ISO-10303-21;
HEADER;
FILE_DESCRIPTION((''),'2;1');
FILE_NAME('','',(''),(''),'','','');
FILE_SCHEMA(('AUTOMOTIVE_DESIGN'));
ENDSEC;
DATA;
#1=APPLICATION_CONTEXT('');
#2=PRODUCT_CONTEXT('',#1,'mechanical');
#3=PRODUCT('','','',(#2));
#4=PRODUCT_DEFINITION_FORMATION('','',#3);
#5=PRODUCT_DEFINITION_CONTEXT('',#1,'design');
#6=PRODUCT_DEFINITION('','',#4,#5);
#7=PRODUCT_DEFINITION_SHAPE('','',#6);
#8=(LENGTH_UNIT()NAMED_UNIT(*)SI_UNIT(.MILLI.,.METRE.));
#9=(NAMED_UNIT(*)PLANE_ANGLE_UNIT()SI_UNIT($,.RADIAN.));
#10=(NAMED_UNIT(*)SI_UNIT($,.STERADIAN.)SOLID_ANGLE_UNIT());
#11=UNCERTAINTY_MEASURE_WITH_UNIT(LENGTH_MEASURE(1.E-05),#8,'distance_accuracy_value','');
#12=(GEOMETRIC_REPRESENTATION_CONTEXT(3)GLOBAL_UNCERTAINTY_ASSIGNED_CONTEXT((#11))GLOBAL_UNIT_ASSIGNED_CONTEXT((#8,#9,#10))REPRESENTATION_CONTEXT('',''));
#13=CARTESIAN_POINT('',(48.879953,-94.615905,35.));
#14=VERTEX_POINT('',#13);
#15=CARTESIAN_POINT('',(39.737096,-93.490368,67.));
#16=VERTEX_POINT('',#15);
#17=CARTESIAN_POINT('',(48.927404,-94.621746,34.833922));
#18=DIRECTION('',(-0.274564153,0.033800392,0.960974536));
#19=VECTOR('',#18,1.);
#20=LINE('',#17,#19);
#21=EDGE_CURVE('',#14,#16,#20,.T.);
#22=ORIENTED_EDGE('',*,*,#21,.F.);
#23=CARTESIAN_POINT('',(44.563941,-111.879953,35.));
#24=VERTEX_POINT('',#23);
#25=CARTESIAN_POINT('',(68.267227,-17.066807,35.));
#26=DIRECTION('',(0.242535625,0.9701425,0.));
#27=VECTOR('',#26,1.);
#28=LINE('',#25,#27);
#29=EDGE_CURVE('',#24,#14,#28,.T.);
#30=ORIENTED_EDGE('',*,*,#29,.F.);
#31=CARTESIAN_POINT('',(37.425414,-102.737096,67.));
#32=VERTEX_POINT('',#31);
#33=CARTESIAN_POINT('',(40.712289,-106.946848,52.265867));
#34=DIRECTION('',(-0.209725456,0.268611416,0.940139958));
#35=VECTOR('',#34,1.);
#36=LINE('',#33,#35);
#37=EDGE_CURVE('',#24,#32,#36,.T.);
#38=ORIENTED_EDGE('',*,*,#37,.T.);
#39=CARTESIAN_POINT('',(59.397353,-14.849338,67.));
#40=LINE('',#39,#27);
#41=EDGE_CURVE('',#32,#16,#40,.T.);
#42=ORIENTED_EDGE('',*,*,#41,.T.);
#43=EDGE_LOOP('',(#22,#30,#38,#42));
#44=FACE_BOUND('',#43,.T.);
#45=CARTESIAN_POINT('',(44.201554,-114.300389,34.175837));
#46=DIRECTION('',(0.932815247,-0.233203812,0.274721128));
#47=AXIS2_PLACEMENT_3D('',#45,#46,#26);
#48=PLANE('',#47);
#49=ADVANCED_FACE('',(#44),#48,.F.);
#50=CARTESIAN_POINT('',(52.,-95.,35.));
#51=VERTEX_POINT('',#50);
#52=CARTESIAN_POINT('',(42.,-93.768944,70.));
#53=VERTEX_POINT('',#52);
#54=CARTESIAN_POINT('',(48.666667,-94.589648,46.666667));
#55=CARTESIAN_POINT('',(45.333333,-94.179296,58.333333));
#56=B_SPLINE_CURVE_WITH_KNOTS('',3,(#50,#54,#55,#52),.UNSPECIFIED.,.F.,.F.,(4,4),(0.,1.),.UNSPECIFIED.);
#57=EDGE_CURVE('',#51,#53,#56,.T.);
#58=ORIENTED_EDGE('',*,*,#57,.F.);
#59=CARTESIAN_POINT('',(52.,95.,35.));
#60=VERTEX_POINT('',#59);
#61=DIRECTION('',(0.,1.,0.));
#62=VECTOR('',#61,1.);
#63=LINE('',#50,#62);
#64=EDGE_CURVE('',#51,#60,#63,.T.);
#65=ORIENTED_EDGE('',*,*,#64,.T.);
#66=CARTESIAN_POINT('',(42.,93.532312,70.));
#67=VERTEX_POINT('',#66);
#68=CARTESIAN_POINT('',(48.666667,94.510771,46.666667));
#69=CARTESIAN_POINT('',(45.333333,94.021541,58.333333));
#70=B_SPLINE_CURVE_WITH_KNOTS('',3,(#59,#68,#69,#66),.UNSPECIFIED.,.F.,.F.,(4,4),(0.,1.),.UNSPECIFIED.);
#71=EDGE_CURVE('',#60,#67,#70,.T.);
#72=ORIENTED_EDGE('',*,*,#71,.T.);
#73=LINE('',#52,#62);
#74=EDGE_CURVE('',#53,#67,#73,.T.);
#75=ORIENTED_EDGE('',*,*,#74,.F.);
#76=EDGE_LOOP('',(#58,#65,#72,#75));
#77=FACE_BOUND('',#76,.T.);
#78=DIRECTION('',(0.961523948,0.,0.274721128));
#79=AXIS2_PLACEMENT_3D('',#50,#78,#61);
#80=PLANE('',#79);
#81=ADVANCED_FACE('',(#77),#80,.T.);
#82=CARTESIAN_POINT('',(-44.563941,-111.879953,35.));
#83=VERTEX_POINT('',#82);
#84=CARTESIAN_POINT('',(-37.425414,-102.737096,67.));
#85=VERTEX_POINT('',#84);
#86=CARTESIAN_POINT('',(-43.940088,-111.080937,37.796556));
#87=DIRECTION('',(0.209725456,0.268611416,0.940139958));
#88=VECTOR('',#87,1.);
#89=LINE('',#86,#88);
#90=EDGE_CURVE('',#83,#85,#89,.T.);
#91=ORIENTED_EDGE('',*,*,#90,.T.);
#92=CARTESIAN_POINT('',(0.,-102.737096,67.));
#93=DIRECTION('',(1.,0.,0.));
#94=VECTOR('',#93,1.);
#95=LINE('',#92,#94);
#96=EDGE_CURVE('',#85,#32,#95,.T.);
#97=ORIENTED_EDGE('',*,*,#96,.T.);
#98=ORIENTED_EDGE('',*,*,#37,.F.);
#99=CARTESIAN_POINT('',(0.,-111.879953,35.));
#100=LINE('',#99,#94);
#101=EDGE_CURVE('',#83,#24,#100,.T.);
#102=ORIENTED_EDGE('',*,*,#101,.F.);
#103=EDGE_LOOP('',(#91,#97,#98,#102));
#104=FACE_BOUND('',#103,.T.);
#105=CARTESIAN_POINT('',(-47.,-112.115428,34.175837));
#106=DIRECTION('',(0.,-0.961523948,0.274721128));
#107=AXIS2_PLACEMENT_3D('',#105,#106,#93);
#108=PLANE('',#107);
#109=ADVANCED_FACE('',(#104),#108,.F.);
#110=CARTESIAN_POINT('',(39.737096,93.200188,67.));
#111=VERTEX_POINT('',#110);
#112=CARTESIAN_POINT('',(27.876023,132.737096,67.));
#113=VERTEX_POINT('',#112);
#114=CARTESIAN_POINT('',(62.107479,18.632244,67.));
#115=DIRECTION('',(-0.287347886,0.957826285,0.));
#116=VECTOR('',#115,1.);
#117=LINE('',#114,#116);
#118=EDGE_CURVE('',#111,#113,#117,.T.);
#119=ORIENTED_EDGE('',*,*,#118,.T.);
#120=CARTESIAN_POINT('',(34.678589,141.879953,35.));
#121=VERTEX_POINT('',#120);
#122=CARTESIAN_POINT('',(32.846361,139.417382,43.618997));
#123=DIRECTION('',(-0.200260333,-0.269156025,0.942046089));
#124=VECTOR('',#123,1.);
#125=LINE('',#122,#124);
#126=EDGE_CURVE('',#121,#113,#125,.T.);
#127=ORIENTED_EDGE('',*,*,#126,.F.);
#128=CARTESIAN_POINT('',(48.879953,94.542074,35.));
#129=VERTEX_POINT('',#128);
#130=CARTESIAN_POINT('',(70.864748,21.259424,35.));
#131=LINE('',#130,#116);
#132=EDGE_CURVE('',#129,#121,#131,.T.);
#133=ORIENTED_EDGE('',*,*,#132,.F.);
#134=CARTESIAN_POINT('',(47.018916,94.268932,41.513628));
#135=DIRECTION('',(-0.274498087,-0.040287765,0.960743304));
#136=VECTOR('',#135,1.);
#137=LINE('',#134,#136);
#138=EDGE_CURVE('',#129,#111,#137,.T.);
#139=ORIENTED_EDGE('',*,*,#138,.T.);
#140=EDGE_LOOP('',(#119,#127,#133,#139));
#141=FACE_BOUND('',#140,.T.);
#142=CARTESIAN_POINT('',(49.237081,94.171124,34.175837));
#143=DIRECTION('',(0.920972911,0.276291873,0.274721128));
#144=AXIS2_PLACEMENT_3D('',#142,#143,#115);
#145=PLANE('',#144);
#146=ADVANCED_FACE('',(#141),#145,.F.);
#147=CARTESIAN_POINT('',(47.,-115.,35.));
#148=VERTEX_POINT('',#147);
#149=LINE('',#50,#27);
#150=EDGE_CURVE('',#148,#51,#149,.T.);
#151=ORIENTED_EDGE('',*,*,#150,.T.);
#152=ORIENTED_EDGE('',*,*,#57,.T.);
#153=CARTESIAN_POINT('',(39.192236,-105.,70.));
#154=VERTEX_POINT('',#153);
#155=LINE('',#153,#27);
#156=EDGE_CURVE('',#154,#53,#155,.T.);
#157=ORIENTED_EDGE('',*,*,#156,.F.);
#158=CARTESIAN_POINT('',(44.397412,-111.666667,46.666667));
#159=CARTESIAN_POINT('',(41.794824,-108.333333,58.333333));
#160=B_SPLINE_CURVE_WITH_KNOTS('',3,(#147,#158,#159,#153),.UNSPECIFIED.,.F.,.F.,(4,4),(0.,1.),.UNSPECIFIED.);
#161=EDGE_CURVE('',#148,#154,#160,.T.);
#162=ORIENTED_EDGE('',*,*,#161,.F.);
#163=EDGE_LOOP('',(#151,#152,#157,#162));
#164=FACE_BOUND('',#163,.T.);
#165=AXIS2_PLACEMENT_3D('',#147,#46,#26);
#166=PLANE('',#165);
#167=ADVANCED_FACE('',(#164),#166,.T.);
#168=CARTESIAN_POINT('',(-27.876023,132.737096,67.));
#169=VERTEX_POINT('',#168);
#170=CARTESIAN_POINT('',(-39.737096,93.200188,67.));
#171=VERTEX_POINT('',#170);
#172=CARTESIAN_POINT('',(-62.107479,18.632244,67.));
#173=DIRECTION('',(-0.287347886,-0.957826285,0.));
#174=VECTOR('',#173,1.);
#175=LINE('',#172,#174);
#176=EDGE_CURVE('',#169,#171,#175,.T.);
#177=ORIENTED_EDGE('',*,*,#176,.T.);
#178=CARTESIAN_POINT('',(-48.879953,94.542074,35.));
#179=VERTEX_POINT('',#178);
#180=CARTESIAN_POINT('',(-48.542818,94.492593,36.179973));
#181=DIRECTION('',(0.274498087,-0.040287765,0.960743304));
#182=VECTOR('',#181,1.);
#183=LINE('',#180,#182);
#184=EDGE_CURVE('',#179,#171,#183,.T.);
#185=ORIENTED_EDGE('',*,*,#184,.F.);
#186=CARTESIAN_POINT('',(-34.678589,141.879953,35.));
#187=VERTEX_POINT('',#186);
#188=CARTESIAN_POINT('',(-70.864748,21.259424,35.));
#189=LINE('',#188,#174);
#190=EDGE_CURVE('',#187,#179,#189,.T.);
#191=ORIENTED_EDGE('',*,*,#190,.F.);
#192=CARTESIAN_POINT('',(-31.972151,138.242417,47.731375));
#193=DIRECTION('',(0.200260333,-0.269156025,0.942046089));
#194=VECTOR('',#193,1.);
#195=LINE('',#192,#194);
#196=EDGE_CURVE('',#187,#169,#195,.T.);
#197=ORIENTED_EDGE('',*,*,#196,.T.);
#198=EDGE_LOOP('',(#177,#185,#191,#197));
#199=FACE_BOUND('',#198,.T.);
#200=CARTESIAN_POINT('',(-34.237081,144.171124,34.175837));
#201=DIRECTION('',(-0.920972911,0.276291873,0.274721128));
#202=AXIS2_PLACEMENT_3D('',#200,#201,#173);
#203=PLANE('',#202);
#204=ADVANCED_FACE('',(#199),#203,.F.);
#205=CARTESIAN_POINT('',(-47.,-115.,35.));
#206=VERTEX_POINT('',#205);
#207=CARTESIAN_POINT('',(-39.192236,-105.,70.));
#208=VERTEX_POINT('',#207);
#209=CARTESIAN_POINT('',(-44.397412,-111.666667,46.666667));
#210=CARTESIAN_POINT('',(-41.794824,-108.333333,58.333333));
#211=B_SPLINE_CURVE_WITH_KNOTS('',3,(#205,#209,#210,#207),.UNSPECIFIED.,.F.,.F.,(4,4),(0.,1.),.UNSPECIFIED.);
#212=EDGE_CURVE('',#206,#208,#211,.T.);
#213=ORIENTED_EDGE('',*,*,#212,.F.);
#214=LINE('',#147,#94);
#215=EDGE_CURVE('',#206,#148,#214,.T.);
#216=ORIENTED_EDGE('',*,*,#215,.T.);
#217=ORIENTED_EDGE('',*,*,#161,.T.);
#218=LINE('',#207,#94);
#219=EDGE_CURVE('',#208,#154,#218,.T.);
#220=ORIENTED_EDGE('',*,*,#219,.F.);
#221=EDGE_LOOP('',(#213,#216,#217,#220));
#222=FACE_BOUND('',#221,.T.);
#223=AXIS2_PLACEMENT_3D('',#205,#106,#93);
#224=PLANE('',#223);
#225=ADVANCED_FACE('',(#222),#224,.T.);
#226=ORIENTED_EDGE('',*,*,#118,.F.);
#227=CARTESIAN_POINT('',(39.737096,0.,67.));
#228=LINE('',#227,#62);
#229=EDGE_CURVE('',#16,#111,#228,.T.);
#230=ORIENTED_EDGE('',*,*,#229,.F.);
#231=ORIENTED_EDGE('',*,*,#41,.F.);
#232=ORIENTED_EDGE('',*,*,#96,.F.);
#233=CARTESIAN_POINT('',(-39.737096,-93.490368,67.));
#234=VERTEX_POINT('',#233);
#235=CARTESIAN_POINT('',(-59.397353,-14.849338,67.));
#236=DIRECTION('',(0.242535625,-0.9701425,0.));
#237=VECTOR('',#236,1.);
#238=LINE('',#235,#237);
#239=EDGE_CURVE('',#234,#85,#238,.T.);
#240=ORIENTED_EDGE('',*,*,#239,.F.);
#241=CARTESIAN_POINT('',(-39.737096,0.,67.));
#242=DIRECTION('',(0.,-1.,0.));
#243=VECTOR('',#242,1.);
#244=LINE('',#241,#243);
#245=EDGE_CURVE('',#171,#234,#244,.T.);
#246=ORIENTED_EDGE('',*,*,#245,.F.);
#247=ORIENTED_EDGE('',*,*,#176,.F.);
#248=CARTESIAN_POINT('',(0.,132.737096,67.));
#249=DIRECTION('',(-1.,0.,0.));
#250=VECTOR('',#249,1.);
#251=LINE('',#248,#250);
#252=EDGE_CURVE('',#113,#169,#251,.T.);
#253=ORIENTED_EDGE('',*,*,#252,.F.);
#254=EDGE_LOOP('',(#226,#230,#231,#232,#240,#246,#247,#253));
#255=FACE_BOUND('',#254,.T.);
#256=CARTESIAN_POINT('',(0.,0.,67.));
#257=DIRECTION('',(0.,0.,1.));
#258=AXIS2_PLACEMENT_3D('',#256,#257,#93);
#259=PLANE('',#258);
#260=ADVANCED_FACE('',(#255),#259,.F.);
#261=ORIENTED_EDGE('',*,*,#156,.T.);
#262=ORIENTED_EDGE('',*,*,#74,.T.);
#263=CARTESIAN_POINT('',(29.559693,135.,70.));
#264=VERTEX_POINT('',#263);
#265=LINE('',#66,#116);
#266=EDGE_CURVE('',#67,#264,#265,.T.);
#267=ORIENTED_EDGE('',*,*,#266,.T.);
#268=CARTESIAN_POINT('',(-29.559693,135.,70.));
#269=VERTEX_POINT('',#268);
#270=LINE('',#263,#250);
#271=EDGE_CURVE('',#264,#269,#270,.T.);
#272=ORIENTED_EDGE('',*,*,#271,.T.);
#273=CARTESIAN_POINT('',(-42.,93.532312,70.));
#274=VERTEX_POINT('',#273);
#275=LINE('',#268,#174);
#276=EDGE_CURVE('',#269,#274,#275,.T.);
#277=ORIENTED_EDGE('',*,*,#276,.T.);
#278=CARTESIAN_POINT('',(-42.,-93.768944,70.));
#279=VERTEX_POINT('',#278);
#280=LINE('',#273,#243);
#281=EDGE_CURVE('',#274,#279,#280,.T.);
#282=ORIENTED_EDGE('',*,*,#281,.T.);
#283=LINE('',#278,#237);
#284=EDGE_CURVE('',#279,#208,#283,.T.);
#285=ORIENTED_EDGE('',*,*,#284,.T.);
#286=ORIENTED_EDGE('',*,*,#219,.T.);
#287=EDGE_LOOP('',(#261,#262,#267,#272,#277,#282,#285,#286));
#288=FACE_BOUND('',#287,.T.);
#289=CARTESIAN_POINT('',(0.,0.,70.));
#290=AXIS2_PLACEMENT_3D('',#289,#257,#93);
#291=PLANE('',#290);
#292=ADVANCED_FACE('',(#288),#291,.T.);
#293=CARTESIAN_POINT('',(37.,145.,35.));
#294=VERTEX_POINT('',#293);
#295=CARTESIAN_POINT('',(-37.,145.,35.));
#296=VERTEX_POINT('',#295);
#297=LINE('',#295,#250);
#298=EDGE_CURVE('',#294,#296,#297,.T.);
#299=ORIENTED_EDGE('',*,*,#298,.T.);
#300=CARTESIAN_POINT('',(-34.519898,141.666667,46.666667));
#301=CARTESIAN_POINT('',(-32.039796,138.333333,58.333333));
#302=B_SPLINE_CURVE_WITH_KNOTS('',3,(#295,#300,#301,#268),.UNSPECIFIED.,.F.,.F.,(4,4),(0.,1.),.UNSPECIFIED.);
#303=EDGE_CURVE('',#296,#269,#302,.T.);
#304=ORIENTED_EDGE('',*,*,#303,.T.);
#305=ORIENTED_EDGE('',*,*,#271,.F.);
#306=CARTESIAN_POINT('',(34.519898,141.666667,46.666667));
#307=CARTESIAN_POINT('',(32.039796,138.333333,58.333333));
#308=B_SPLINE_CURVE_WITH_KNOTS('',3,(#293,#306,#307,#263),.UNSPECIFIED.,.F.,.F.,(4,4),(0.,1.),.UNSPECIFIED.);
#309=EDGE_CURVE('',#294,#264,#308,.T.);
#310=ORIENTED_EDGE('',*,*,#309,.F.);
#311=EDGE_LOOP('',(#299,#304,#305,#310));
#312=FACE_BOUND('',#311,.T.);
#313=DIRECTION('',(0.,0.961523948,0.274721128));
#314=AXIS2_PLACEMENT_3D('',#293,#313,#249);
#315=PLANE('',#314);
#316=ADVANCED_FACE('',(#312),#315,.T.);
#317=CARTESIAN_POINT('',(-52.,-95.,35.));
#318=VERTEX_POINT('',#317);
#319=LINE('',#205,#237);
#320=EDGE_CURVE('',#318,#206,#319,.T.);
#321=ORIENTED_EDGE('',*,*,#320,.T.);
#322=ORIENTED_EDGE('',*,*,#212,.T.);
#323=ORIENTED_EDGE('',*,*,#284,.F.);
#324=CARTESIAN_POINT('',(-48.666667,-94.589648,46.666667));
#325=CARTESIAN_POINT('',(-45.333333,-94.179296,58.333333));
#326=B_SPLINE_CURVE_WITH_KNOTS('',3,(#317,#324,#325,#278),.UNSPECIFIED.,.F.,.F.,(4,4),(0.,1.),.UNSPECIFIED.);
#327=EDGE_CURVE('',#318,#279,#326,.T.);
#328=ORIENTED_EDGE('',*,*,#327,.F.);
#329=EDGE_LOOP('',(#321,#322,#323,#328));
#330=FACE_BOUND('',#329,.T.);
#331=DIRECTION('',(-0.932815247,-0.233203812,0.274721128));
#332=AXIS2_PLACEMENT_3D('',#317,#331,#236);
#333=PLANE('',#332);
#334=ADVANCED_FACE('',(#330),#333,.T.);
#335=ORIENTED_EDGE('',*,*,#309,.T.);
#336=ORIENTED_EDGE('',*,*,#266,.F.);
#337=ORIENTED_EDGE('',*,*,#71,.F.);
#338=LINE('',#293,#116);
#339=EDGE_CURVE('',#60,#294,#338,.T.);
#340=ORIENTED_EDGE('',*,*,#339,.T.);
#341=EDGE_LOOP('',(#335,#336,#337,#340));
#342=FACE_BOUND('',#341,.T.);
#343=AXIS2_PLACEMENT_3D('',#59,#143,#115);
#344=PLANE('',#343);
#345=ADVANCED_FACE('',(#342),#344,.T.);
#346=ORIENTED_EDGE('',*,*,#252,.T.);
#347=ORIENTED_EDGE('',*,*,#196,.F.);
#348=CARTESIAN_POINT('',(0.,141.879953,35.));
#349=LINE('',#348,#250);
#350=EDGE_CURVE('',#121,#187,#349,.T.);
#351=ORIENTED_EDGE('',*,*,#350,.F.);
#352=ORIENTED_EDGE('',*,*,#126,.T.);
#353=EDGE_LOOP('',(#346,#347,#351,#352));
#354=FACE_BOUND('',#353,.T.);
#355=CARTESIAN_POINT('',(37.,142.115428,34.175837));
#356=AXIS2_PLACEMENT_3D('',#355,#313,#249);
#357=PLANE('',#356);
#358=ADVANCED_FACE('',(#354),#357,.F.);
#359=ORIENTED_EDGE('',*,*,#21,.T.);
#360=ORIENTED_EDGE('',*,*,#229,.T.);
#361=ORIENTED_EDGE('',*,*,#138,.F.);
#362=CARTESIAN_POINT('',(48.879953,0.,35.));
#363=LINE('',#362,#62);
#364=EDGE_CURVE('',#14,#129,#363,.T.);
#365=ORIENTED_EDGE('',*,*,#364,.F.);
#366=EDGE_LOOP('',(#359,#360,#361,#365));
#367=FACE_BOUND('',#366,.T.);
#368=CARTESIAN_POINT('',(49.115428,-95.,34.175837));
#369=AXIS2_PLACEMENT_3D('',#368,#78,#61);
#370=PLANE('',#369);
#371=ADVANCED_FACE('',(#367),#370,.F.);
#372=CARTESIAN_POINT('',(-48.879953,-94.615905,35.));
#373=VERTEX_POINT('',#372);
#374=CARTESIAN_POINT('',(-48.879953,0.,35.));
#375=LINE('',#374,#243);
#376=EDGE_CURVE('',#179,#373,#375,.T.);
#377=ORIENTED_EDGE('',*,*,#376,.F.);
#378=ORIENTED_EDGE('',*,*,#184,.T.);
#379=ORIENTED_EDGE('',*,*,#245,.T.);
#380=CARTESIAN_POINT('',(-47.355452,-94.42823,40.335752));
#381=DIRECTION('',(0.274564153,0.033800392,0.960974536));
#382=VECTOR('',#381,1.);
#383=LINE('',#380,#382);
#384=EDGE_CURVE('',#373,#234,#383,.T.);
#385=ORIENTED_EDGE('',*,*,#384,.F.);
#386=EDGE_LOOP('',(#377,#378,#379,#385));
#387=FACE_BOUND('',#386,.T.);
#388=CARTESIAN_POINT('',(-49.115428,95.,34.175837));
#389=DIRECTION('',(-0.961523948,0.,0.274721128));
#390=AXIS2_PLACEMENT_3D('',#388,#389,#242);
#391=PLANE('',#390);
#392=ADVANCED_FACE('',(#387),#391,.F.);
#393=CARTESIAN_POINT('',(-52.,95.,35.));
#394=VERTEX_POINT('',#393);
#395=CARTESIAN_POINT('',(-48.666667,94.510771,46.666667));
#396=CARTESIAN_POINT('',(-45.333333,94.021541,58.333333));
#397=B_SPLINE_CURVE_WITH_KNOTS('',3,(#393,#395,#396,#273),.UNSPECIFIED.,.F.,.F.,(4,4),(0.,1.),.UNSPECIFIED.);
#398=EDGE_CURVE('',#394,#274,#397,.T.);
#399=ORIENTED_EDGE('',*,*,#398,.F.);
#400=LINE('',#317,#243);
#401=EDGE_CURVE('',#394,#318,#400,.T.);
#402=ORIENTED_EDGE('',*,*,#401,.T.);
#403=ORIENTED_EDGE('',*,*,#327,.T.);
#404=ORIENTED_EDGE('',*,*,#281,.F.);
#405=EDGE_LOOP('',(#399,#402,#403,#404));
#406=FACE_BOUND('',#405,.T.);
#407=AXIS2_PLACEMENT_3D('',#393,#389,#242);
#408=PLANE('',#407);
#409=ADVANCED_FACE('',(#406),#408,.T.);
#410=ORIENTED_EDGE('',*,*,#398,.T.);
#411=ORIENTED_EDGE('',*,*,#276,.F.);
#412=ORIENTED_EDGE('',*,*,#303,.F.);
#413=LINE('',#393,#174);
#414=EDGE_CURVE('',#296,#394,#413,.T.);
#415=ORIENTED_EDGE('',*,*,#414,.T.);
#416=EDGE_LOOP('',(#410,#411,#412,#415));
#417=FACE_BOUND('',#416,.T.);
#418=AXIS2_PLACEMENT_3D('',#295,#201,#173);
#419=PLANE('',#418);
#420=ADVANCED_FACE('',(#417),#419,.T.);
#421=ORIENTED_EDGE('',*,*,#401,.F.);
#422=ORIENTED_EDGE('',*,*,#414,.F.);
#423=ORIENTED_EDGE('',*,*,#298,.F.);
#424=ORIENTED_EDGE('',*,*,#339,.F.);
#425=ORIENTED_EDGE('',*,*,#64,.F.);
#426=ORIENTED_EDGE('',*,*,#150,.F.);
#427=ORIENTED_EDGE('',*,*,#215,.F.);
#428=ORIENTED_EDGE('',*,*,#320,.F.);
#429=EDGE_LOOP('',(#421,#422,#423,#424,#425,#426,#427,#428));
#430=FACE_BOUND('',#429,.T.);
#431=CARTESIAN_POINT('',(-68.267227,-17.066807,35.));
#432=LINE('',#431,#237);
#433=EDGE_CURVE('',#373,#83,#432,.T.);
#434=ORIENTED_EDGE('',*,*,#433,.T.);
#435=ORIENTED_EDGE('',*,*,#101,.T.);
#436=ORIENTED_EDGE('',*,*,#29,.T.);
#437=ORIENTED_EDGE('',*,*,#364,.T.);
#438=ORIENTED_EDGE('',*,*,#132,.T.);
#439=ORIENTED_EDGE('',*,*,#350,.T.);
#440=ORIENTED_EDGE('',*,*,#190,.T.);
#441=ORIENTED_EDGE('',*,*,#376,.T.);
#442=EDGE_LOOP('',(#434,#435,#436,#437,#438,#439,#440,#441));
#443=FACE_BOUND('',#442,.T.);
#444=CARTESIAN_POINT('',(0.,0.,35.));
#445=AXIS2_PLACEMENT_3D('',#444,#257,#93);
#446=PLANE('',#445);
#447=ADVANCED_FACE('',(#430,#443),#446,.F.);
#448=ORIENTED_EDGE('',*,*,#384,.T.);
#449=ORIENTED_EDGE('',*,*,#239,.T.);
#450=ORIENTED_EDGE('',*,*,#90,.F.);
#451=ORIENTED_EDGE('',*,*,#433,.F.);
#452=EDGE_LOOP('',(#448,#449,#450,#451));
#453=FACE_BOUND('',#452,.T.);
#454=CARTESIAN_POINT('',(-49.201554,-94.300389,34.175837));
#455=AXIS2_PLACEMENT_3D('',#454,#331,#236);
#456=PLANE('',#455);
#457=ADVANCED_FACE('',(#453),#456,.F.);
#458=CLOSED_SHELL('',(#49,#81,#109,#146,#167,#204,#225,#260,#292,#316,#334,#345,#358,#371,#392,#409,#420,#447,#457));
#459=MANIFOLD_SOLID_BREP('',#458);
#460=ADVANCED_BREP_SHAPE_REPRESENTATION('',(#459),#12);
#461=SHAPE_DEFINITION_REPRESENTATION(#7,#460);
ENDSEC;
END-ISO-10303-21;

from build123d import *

# Parameters (mm, degrees)
LOFT2_DEPTH = 35
LOFT2_DRAFT = 15.9453959
SHELL1_T    = -3


# Read off the part's stored shape, not the designer's step: Loft2
with BuildPart() as part:
    # Loft2 outline → Loft2 (with draft: the straight prism first)
    with BuildSketch(Plane.XY.offset(70)):
        Polygon((39.192235936, -105), (42, -93.768943744), (42, 93.532311637), (29.559693491, 135), (-29.559693491, 135), (-42, 93.532311637), (-42, -93.768943744), (-39.192235936, -105), align=None)
    extrude(amount=-LOFT2_DEPTH)
    # Loft2: the draft: its side faces are tilted about the plane it starts from
    loft2_sides = [part.faces().sort_by_distance(p)[0] for p in [
        (40.596117968, -99.384471872, 52.5),
        (42, -0.118316053, 52.5),
        (35.779846746, 114.266155819, 52.5),
        (0, 135, 52.5),
        (-35.779846746, 114.266155818, 52.5),
        (-42, -0.118316053, 52.5),
        (-40.596117968, -99.384471872, 52.5),
        (0, -105, 52.5),
    ]]
    draft(loft2_sides, Plane.XY.offset(70), LOFT2_DRAFT)

    # Shell1
    shell1_openings = [part.faces().sort_by_distance(p)[0] for p in [
        (0, 12.225404098, 35),
    ]]
    offset(amount=SHELL1_T, openings=shell1_openings, kind=Kind.INTERSECTION)


solid = part.part
